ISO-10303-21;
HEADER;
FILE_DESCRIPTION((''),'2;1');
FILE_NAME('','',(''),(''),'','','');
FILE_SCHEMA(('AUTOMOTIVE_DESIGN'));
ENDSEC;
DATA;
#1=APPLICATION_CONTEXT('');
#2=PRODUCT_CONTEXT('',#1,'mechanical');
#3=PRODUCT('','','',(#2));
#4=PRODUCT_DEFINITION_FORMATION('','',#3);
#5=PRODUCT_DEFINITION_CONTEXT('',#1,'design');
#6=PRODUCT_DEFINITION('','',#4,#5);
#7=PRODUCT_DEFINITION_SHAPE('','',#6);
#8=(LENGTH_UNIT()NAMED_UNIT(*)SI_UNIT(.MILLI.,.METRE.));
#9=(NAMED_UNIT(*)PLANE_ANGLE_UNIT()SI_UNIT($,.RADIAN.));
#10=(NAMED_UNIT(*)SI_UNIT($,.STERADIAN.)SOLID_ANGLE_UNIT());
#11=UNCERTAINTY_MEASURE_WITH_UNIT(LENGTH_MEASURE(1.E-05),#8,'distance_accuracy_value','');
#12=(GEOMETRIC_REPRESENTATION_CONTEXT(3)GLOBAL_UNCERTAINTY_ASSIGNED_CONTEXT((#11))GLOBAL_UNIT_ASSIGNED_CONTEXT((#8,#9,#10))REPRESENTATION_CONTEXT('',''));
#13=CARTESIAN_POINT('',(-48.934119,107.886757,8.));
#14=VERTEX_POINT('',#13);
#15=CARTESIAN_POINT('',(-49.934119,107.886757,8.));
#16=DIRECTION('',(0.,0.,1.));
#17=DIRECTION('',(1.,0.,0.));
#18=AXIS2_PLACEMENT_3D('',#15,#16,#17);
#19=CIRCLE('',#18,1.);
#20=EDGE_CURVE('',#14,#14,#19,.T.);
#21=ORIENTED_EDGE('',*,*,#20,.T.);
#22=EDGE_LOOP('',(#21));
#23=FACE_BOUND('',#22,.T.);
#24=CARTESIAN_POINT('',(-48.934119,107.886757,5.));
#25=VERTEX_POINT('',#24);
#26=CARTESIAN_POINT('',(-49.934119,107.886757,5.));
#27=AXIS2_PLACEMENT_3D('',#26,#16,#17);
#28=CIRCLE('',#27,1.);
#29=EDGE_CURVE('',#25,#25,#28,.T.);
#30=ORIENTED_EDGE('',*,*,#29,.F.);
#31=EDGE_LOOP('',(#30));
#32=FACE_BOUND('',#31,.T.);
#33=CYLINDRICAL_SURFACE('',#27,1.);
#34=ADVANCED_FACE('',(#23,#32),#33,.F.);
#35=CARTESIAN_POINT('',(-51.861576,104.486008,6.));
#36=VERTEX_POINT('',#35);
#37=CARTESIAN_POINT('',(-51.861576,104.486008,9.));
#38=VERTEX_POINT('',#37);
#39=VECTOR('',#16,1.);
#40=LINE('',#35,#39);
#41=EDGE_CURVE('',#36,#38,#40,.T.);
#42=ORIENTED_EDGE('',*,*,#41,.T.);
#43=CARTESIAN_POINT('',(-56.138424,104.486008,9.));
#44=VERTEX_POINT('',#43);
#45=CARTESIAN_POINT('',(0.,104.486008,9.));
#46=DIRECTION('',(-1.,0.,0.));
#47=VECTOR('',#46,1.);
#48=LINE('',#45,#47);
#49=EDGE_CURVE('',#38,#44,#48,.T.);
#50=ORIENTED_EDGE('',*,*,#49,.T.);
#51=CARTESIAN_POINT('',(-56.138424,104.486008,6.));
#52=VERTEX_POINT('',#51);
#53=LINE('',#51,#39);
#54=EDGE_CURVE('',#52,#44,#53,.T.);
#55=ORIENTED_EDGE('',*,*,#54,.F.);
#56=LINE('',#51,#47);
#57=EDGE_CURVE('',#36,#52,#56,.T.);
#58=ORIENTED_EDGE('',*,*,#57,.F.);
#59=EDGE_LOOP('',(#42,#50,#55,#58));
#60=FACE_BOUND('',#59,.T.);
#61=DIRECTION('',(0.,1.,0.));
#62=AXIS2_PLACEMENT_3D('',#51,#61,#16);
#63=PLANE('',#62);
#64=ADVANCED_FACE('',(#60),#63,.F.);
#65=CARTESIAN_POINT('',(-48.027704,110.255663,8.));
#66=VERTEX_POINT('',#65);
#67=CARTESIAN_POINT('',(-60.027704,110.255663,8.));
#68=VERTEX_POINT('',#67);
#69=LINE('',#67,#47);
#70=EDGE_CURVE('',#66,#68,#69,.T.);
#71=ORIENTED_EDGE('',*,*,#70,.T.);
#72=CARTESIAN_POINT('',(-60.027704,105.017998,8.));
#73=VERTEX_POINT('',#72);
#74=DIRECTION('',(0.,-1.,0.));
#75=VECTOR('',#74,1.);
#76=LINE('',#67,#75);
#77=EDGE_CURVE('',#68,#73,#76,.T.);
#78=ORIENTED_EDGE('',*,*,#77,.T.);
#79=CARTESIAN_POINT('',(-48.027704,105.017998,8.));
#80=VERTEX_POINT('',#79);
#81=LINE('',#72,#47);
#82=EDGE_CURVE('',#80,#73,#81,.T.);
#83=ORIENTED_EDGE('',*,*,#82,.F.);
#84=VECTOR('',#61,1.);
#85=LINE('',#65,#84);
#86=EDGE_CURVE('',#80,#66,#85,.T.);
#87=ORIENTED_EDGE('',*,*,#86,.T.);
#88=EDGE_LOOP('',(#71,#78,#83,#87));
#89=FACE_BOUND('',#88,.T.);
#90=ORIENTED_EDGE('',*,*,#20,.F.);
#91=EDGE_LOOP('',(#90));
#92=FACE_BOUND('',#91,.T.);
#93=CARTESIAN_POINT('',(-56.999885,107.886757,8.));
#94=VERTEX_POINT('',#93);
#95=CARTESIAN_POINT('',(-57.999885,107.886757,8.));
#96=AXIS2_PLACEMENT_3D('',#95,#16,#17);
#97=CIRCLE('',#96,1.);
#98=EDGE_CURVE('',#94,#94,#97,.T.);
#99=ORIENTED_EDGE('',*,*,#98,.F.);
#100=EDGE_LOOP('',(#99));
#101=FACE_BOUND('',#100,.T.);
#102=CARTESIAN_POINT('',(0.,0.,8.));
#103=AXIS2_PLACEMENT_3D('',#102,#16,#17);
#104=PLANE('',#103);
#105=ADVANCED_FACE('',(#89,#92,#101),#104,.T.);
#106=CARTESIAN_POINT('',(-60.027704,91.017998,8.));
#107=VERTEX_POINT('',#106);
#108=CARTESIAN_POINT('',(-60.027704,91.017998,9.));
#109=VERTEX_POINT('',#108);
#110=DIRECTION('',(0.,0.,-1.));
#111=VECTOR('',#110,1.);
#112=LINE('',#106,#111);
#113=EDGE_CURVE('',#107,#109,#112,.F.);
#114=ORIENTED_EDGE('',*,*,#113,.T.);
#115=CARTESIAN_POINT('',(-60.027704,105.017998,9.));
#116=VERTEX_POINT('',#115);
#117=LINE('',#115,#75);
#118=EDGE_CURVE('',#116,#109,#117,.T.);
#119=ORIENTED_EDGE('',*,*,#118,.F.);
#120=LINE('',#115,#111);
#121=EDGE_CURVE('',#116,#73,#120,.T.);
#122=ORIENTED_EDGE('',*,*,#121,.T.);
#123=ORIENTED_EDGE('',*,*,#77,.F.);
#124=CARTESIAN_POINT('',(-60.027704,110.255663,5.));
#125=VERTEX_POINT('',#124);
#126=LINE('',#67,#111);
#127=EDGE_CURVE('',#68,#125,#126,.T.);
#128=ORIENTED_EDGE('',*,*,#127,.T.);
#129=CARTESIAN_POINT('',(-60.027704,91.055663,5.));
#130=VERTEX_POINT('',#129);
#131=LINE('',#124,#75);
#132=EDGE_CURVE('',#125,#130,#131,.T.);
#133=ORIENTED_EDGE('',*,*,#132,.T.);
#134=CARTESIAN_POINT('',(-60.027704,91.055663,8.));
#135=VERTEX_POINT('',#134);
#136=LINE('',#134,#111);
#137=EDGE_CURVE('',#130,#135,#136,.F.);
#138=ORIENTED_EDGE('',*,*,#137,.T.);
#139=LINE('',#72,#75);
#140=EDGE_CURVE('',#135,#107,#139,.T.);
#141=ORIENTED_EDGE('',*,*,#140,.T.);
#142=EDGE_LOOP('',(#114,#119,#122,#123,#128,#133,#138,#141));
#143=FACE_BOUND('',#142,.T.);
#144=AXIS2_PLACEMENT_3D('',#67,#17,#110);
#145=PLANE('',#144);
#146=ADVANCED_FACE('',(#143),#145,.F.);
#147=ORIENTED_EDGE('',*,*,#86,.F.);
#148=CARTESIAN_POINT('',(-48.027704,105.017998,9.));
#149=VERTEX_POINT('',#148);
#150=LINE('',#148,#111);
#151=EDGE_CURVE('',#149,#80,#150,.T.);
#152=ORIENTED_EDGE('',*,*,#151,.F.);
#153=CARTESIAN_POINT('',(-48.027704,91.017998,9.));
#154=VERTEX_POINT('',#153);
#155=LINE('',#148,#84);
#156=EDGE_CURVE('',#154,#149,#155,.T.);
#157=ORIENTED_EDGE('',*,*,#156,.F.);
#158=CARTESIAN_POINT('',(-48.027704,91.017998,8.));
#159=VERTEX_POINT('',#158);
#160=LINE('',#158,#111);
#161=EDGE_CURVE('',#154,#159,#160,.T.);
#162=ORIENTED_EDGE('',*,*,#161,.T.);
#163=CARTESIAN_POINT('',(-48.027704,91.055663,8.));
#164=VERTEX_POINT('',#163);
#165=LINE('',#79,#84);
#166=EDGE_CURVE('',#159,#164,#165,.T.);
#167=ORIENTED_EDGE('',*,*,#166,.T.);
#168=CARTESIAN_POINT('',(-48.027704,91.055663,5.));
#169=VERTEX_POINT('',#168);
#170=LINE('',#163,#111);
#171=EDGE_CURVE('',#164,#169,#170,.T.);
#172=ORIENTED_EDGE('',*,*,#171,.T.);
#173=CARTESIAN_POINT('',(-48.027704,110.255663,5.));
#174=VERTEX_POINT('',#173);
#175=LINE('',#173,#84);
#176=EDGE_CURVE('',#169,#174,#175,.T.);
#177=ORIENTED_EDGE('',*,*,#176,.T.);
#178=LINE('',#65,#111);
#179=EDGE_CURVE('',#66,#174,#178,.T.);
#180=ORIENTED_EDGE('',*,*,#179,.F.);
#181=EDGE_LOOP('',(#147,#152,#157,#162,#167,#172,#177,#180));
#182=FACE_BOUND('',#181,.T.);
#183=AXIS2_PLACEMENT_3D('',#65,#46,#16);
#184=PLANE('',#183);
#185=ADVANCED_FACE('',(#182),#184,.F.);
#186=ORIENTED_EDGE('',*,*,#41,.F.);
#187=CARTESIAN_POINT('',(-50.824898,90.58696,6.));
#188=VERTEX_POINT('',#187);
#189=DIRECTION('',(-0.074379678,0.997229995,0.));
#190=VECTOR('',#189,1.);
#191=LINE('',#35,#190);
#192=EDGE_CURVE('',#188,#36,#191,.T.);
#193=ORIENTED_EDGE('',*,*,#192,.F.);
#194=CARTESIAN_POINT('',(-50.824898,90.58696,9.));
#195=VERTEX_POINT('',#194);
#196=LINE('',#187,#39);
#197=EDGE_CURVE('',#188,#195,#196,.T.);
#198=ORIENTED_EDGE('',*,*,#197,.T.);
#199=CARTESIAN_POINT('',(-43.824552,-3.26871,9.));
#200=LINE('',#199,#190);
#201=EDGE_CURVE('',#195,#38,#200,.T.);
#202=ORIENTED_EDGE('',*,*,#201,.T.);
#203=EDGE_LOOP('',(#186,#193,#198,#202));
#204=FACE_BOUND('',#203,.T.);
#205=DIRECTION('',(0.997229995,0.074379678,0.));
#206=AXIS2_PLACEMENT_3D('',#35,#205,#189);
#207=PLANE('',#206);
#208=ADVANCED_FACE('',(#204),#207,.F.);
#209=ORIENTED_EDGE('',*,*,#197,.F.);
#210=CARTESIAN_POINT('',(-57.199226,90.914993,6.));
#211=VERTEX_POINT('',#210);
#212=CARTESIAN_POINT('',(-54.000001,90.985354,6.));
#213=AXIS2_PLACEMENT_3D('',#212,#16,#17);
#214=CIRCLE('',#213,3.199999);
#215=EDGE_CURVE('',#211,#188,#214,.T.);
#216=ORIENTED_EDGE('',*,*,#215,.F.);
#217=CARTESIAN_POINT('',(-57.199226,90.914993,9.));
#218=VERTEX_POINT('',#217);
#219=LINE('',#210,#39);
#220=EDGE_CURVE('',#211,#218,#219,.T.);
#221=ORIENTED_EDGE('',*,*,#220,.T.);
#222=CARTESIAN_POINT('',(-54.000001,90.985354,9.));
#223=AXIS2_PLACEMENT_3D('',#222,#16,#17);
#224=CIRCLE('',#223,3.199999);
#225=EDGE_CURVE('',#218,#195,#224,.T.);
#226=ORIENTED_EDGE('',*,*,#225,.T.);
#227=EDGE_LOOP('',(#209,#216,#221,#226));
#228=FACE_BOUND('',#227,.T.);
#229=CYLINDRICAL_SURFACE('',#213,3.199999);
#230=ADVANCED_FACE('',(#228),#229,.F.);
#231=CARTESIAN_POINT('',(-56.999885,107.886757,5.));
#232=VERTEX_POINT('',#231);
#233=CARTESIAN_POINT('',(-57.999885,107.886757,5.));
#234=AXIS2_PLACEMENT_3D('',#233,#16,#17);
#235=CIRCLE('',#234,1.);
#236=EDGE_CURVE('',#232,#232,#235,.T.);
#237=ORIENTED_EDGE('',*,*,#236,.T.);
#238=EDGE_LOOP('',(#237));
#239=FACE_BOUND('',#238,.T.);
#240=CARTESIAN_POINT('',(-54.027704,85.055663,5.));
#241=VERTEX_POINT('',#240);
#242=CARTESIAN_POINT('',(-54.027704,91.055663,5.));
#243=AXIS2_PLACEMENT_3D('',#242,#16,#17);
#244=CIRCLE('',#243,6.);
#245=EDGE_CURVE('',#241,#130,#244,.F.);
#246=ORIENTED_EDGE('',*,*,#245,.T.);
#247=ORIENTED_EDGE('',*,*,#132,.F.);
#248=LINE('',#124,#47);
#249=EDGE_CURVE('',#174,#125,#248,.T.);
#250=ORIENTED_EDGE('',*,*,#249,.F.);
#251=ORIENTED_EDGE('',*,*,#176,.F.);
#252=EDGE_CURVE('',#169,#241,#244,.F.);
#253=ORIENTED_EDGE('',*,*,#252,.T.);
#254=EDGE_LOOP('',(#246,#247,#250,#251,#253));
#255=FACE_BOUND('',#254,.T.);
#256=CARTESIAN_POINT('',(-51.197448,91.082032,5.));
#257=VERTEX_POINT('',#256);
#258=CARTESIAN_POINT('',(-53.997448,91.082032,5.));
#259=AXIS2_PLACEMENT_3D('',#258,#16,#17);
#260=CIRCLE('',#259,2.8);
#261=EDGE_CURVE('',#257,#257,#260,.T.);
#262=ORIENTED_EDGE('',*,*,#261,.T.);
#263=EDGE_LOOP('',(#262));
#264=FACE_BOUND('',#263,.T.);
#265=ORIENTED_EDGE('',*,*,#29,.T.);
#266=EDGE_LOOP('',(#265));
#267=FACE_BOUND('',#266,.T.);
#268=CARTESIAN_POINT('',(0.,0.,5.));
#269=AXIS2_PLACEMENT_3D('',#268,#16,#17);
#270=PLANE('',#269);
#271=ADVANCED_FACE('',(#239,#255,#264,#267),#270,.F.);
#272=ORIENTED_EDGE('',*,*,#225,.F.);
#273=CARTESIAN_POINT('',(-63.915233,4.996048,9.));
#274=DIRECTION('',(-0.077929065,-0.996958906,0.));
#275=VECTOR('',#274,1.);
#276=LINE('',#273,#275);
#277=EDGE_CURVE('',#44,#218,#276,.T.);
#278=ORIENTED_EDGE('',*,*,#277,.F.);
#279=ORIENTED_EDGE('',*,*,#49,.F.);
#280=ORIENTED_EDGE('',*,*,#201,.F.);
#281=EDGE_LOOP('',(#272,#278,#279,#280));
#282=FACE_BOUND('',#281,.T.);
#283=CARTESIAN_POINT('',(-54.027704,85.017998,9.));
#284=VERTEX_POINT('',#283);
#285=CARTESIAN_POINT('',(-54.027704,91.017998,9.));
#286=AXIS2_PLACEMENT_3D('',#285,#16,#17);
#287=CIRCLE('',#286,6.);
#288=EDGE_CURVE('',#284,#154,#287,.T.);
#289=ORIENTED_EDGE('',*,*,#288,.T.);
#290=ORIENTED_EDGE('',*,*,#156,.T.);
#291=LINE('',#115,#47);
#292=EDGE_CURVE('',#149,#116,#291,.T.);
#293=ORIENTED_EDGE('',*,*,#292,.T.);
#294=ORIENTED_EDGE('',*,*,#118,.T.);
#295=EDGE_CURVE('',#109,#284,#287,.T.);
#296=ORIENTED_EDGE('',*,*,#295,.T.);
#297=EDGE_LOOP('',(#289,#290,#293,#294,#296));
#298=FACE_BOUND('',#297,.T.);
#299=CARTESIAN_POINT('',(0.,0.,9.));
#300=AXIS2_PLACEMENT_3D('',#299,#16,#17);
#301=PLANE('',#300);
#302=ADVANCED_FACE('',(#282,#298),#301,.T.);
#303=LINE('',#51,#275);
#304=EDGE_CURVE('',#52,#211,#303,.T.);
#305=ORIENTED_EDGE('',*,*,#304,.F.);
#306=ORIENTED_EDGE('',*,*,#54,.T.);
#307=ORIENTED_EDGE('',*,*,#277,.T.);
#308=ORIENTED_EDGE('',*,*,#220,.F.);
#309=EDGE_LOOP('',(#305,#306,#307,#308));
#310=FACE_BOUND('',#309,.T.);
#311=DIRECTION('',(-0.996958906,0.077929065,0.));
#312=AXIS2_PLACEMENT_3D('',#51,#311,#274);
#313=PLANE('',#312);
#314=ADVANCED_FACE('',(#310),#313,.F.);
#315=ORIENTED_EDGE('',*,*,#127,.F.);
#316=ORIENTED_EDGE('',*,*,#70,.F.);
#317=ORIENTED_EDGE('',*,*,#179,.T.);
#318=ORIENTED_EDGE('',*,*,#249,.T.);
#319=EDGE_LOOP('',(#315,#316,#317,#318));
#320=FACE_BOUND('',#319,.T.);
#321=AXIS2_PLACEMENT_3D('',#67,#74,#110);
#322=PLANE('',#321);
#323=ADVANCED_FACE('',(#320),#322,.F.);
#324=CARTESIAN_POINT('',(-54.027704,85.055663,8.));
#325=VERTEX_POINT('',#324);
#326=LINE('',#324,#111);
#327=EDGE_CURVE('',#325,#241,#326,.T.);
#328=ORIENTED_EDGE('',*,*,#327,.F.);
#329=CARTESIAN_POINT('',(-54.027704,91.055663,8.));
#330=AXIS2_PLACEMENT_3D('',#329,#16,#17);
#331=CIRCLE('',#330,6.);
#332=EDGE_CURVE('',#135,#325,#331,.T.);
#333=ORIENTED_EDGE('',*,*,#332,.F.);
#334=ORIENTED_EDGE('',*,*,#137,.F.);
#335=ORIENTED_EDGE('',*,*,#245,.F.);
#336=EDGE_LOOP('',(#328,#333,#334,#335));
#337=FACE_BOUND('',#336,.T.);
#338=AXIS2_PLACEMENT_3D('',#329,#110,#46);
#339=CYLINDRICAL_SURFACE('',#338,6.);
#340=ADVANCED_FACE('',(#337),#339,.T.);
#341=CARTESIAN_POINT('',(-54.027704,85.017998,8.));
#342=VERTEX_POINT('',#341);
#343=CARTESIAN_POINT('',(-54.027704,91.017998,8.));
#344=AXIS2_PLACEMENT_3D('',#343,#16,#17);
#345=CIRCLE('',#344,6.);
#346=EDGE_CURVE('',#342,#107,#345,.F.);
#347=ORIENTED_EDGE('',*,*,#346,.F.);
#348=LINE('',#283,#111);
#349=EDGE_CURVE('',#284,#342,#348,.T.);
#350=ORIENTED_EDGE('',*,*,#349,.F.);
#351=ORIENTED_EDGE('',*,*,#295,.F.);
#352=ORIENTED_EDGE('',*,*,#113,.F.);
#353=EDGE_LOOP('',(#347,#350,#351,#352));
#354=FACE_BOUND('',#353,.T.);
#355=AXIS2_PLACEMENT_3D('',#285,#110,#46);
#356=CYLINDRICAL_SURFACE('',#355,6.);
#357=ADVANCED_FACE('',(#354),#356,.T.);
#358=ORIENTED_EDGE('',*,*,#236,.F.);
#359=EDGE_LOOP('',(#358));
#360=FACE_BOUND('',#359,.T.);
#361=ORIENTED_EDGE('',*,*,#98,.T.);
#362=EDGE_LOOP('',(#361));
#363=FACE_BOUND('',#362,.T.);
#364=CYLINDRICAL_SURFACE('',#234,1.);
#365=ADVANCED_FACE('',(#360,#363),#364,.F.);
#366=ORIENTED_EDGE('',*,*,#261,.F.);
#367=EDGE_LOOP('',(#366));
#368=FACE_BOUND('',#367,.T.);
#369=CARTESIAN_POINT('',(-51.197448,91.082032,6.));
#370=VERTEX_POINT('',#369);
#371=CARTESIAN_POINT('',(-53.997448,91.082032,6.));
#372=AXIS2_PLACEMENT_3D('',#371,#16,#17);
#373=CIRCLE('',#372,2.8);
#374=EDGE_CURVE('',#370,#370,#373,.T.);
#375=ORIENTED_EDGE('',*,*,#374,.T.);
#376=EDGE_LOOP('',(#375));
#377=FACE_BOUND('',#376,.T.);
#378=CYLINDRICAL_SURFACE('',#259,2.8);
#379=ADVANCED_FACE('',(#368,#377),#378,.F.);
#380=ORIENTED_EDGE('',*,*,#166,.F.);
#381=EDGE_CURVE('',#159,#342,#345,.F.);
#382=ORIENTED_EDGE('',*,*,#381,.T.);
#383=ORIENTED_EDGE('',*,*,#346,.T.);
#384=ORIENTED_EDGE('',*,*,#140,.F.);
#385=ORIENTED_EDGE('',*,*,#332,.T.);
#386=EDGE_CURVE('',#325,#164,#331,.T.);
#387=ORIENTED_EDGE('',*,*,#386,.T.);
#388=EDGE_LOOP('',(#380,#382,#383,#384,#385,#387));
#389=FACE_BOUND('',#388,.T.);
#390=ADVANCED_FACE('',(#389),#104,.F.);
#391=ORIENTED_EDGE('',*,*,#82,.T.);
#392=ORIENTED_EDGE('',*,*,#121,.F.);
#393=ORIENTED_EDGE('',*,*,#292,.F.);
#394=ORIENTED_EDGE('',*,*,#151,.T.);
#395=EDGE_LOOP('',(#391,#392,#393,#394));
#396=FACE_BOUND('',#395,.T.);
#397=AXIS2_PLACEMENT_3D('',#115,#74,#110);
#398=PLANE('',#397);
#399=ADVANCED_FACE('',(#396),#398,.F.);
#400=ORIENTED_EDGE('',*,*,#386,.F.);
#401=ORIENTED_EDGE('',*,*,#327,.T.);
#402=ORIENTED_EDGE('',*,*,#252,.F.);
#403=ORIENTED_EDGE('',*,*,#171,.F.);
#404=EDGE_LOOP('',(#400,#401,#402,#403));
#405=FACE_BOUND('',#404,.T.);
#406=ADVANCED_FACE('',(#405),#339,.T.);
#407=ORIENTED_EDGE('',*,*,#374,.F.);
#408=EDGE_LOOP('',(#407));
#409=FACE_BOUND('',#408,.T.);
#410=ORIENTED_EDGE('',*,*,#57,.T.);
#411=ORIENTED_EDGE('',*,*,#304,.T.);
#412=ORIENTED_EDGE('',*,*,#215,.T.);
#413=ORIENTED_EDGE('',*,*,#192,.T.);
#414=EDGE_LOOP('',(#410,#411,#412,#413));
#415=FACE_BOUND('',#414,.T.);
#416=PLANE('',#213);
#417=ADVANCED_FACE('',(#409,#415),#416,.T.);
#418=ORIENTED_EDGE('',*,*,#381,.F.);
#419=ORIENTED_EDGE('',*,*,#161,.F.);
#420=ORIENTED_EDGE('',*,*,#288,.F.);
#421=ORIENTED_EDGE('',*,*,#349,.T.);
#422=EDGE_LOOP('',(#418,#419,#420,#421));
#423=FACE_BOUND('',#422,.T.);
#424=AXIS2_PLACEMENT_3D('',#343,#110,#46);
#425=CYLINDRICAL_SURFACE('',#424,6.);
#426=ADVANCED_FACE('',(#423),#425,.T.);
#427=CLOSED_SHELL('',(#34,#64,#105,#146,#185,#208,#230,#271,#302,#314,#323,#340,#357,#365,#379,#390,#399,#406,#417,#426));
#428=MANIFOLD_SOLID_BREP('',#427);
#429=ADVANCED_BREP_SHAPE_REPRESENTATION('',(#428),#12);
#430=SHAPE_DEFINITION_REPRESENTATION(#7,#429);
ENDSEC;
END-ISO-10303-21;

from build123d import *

# Parameters (mm, degrees)
SKETCH1_W           = 12
SKETCH1_H           = 25.2
BOSS_EXTRUDE1_DEPTH = 3
FILLET1_R           = 6
SKETCH3_W           = 12
SKETCH3_H           = 20
BOSS_EXTRUDE2_DEPTH = 1
FILLET2_R           = 6
CUT_EXTRUDE1_DEPTH  = 3
SKETCH5_R           = 2.8
CUT_EXTRUDE2_DEPTH  = 126.573231257
SKETCH6_R           = 1
CUT_EXTRUDE3_DEPTH  = 126.573231257


with BuildPart() as part:
    # Sketch1 → Boss-Extrude1 (new body)
    with BuildSketch(Plane.XY.offset(5)):
        with Locations((-54.027704131, 97.655662644)):
            Rectangle(SKETCH1_W, SKETCH1_H)
    extrude(amount=BOSS_EXTRUDE1_DEPTH)

    # Fillet1
    fillet1_edges = [part.edges().sort_by_distance(p)[0] for p in [
        (-48.027704131, 85.055662644, 6.5),
        (-60.027704131, 85.055662644, 6.5),
    ]]
    fillet(fillet1_edges, radius=FILLET1_R - 0.0001)  # a hair under: the kernel refuses the full size

    # Sketch3 → Boss-Extrude2 (add)
    with BuildSketch(Plane.XY.offset(8)):
        with Locations((-54.027704131, 95.017998247)):
            Rectangle(SKETCH3_W, SKETCH3_H)
    extrude(amount=BOSS_EXTRUDE2_DEPTH)

    # Fillet2
    fillet2_edges = [part.edges().sort_by_distance(p)[0] for p in [
        (-48.027704131, 85.017998247, 8.5),
        (-60.027704131, 85.017998247, 8.5),
    ]]
    fillet(fillet2_edges, radius=FILLET2_R - 0.0001)  # a hair under: the kernel refuses the full size

    # Sketch4 → Cut-Extrude1 (cut, symmetric)
    with BuildSketch(Plane.XY.offset(9)):
        with BuildLine():
            Line((-56.13842392, 104.48600769), (-51.86157608, 104.48600769))
            Line((-51.86157608, 104.48600769), (-50.824897766, 90.586959839))
            ThreePointArc((-50.824897766, 90.586959839), (-54.164460237, 87.789583498), (-57.199226379, 90.914993286))
            Line((-57.199226379, 90.914993286), (-56.13842392, 104.48600769))
        make_face()
    extrude(amount=CUT_EXTRUDE1_DEPTH, both=True, mode=Mode.SUBTRACT)

    # Sketch5 → Cut-Extrude2 (cut, through all)
    with BuildSketch(Plane.XY.offset(6)):
        with Locations((-53.997448325, 91.08203191)):
            Circle(SKETCH5_R)
    extrude(amount=-CUT_EXTRUDE2_DEPTH, mode=Mode.SUBTRACT)

    # Sketch6 → Cut-Extrude3 (cut, through all)
    with BuildSketch(Plane.XY.offset(8)):
        with Locations((-57.999885247, 107.886757068)):
            Circle(SKETCH6_R)
        with Locations((-49.934118523, 107.886757068)):
            Circle(SKETCH6_R)
    extrude(amount=-CUT_EXTRUDE3_DEPTH, mode=Mode.SUBTRACT)


solid = part.part
